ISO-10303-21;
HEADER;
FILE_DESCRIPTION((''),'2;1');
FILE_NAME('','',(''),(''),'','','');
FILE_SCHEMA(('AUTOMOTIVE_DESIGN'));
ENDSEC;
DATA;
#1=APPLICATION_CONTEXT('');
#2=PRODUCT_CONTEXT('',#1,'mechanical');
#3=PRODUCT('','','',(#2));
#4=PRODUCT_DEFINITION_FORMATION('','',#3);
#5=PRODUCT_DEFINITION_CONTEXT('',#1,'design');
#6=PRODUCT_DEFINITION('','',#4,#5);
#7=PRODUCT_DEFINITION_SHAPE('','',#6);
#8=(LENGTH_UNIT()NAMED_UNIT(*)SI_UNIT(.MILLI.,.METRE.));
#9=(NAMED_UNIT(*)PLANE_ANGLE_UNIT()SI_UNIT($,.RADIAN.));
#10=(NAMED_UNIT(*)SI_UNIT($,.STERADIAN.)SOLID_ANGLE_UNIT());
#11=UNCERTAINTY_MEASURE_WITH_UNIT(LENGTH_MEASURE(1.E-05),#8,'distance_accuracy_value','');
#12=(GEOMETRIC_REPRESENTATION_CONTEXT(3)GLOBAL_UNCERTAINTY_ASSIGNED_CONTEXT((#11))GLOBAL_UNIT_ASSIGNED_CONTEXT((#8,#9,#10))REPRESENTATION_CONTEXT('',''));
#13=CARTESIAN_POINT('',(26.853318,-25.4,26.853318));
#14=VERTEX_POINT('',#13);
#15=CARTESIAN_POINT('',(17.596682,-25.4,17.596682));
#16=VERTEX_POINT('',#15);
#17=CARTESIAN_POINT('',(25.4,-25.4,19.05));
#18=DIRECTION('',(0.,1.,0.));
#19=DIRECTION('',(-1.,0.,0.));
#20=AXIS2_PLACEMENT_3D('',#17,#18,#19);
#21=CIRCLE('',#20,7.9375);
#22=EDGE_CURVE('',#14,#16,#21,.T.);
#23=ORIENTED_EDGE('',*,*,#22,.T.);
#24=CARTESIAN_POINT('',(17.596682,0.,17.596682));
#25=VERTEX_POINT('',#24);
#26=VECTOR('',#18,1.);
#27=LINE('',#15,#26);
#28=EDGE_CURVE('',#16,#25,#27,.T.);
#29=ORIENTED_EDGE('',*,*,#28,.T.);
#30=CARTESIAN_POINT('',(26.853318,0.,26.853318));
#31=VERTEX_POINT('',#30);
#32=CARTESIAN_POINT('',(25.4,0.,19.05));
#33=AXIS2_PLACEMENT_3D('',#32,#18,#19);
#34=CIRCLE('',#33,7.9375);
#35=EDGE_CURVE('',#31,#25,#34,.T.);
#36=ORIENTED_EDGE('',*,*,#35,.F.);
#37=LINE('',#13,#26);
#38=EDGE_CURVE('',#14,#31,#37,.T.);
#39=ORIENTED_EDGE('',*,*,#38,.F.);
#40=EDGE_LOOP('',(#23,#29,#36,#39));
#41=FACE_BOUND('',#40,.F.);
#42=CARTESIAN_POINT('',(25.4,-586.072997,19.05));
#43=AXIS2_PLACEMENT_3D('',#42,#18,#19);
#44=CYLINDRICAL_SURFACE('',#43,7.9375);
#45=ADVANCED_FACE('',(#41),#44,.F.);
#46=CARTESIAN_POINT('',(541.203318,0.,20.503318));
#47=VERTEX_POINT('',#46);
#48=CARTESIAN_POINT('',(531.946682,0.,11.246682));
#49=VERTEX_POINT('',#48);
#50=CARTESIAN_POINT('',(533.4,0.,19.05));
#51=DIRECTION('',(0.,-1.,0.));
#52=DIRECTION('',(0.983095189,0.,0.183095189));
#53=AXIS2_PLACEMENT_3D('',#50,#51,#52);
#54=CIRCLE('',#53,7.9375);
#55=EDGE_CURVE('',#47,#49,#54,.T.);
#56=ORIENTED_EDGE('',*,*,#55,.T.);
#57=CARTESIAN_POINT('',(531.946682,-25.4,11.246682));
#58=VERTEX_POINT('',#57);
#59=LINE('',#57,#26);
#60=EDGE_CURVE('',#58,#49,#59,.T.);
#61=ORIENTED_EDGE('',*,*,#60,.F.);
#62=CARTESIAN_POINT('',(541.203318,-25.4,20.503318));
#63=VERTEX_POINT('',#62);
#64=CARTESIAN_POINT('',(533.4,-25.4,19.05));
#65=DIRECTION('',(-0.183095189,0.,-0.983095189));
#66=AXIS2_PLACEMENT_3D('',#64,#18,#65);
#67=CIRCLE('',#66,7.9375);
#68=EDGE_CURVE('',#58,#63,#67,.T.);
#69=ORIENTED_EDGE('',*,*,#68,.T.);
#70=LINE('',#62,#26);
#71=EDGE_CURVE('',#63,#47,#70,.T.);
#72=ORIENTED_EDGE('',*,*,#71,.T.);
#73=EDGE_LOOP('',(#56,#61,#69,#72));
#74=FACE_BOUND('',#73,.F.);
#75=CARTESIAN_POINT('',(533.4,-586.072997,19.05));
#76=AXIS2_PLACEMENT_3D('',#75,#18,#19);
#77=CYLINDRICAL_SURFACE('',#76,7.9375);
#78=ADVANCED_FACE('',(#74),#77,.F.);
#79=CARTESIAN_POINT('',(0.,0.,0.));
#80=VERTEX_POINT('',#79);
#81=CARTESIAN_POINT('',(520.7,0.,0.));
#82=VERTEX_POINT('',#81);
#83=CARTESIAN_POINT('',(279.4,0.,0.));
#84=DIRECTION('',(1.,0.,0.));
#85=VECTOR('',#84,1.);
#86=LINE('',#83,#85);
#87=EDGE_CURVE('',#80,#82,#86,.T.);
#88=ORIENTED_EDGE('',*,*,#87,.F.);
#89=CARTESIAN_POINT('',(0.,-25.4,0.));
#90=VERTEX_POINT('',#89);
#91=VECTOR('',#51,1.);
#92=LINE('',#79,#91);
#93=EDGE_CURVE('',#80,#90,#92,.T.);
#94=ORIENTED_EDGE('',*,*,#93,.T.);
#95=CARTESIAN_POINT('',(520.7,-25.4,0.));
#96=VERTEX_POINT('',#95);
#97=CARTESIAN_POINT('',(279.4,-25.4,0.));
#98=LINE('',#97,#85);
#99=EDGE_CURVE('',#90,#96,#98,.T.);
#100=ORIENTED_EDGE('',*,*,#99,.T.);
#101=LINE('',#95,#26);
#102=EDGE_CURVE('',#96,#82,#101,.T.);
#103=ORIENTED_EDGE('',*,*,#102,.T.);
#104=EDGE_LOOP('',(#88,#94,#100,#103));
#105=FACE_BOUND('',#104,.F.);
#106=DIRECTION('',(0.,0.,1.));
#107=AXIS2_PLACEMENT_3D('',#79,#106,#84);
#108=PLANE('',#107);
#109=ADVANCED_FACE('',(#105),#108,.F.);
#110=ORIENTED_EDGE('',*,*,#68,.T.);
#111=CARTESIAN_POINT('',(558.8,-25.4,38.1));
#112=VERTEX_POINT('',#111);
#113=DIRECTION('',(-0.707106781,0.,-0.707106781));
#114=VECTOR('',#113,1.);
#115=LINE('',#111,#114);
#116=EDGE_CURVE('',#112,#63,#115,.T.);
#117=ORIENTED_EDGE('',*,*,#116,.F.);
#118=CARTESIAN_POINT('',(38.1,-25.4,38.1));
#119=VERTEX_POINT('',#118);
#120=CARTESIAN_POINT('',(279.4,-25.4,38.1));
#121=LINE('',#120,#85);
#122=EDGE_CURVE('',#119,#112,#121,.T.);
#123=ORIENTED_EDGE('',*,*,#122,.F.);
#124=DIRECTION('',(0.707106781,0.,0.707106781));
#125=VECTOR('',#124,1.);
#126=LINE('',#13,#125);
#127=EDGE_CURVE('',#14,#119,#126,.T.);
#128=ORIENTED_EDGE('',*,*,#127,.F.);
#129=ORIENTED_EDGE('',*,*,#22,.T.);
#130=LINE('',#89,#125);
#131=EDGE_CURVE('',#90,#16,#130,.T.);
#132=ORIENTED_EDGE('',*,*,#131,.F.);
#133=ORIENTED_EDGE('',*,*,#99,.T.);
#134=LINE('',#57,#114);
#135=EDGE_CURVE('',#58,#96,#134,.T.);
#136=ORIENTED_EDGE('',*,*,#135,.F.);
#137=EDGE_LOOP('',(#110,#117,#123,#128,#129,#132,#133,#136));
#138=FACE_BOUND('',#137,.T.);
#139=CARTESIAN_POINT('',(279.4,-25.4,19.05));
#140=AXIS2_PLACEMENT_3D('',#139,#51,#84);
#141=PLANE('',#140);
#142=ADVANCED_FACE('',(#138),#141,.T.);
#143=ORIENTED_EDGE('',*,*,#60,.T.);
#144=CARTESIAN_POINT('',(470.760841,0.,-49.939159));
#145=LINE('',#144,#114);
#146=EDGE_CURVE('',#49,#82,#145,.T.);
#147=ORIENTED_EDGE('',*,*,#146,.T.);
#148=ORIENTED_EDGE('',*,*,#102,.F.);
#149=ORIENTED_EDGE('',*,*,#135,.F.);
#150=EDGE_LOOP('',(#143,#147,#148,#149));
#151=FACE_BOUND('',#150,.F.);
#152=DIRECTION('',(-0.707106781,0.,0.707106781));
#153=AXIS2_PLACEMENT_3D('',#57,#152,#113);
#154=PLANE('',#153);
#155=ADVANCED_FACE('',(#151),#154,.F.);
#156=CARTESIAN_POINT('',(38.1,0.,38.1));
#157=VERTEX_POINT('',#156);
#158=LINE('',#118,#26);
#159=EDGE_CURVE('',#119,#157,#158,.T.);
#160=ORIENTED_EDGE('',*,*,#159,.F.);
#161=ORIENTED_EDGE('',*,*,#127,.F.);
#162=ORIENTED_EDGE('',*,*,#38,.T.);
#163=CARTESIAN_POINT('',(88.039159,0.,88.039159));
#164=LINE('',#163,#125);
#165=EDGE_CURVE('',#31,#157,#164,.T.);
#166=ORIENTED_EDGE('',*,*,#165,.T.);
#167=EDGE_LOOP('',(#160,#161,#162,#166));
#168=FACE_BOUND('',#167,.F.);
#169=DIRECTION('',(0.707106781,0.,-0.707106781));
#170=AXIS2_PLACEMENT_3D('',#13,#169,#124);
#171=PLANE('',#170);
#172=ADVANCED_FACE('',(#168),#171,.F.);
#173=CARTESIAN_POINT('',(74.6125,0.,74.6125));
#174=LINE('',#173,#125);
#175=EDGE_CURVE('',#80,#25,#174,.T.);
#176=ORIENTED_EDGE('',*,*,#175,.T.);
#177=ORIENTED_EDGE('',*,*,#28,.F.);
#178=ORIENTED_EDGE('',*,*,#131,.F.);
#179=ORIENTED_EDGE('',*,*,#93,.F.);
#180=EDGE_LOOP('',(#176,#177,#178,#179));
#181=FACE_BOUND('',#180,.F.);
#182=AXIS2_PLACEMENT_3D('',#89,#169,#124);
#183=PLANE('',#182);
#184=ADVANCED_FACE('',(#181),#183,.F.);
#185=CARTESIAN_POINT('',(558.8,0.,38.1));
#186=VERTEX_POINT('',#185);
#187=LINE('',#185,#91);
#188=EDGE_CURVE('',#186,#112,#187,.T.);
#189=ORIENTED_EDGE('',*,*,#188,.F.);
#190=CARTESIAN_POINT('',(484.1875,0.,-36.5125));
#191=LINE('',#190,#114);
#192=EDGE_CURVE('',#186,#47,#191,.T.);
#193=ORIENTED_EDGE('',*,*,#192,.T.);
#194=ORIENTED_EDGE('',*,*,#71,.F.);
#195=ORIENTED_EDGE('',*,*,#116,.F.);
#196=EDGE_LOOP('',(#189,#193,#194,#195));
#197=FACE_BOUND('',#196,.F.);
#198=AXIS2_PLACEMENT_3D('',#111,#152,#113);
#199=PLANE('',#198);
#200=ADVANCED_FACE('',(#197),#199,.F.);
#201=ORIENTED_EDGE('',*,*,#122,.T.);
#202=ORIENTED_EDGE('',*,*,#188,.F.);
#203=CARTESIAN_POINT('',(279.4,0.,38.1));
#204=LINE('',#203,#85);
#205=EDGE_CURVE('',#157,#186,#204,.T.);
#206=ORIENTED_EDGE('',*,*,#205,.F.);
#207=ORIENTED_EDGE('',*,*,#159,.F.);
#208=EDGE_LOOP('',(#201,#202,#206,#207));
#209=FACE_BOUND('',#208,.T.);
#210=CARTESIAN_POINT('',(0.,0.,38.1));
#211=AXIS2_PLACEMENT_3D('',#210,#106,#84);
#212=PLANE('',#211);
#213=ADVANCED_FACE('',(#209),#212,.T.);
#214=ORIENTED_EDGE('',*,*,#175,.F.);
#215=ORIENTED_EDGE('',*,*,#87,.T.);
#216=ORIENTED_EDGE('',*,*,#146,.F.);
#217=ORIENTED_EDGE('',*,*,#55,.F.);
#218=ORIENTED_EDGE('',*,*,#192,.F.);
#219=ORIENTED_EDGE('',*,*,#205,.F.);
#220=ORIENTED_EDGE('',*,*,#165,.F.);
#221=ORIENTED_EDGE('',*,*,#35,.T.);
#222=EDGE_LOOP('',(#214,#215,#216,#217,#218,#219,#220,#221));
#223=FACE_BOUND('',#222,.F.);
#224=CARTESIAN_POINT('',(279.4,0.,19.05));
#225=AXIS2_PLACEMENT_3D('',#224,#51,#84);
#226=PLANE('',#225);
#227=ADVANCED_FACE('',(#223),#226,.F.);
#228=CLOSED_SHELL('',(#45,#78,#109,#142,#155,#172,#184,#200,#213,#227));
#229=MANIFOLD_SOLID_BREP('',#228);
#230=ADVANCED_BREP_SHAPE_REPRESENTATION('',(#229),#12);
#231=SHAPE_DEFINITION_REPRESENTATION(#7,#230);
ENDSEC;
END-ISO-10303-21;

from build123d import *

# Parameters (mm, degrees)
F0_W     = 558.8
F0_H     = 38.1
F1_DEPTH = 25.4
F3_D     = 15.875
F5_DEPTH = 50.8
F7_DEPTH = 50.8


# Not quite as in the source:
# - a feature names something its author has since deleted; it is built from what else it names


with BuildPart() as f1:
    # F0 (on Front) → F1 (new body)
    with BuildSketch(Plane.XZ):
        with Locations((279.4, 19.05)):
            Rectangle(F0_W, F0_H)
    extrude(amount=F1_DEPTH)

    # F3 (through all)
    with Locations(Plane.XZ.offset(25.4)):
        with Locations((25.4, 19.05), (533.4, 19.05)):
            Hole(F3_D / 2)

    # F4 (on face) → F5 (cut)
    with BuildSketch(Plane.XZ.offset(25.4)):
        with BuildLine():
            Line((0, 38.1), (0, 0))
            Line((0, 0), (17.5966819335, 17.5966819335))
            ThreePointArc((17.5966819335, 17.5966819335), (19.7873399243, 24.6626600757), (26.8533180665, 26.8533180665))
            Line((26.8533180665, 26.8533180665), (38.1, 38.1))
            Line((38.1, 38.1), (0, 38.1))
        make_face()
    extrude(amount=-F5_DEPTH, mode=Mode.SUBTRACT)

    # F6 (on face) → F7 (cut)
    with BuildSketch(Plane.XZ.offset(25.4)):
        with BuildLine():
            Line((558.8, 0), (558.8, 38.1))
            Line((558.8, 38.1), (541.2033180665, 20.5033180665))
            ThreePointArc((541.2033180665, 20.5033180665), (541.3038833305, 19.7797496478), (541.3375, 19.05))
            ThreePointArc((541.3375, 19.05), (538.4728785762, 12.9450995748), (531.9466819335, 11.2466819335))
            Line((531.9466819335, 11.2466819335), (520.7, 0))
            Line((520.7, 0), (558.8, 0))
        make_face()
    extrude(amount=-F7_DEPTH, mode=Mode.SUBTRACT)


solid = f1.part
